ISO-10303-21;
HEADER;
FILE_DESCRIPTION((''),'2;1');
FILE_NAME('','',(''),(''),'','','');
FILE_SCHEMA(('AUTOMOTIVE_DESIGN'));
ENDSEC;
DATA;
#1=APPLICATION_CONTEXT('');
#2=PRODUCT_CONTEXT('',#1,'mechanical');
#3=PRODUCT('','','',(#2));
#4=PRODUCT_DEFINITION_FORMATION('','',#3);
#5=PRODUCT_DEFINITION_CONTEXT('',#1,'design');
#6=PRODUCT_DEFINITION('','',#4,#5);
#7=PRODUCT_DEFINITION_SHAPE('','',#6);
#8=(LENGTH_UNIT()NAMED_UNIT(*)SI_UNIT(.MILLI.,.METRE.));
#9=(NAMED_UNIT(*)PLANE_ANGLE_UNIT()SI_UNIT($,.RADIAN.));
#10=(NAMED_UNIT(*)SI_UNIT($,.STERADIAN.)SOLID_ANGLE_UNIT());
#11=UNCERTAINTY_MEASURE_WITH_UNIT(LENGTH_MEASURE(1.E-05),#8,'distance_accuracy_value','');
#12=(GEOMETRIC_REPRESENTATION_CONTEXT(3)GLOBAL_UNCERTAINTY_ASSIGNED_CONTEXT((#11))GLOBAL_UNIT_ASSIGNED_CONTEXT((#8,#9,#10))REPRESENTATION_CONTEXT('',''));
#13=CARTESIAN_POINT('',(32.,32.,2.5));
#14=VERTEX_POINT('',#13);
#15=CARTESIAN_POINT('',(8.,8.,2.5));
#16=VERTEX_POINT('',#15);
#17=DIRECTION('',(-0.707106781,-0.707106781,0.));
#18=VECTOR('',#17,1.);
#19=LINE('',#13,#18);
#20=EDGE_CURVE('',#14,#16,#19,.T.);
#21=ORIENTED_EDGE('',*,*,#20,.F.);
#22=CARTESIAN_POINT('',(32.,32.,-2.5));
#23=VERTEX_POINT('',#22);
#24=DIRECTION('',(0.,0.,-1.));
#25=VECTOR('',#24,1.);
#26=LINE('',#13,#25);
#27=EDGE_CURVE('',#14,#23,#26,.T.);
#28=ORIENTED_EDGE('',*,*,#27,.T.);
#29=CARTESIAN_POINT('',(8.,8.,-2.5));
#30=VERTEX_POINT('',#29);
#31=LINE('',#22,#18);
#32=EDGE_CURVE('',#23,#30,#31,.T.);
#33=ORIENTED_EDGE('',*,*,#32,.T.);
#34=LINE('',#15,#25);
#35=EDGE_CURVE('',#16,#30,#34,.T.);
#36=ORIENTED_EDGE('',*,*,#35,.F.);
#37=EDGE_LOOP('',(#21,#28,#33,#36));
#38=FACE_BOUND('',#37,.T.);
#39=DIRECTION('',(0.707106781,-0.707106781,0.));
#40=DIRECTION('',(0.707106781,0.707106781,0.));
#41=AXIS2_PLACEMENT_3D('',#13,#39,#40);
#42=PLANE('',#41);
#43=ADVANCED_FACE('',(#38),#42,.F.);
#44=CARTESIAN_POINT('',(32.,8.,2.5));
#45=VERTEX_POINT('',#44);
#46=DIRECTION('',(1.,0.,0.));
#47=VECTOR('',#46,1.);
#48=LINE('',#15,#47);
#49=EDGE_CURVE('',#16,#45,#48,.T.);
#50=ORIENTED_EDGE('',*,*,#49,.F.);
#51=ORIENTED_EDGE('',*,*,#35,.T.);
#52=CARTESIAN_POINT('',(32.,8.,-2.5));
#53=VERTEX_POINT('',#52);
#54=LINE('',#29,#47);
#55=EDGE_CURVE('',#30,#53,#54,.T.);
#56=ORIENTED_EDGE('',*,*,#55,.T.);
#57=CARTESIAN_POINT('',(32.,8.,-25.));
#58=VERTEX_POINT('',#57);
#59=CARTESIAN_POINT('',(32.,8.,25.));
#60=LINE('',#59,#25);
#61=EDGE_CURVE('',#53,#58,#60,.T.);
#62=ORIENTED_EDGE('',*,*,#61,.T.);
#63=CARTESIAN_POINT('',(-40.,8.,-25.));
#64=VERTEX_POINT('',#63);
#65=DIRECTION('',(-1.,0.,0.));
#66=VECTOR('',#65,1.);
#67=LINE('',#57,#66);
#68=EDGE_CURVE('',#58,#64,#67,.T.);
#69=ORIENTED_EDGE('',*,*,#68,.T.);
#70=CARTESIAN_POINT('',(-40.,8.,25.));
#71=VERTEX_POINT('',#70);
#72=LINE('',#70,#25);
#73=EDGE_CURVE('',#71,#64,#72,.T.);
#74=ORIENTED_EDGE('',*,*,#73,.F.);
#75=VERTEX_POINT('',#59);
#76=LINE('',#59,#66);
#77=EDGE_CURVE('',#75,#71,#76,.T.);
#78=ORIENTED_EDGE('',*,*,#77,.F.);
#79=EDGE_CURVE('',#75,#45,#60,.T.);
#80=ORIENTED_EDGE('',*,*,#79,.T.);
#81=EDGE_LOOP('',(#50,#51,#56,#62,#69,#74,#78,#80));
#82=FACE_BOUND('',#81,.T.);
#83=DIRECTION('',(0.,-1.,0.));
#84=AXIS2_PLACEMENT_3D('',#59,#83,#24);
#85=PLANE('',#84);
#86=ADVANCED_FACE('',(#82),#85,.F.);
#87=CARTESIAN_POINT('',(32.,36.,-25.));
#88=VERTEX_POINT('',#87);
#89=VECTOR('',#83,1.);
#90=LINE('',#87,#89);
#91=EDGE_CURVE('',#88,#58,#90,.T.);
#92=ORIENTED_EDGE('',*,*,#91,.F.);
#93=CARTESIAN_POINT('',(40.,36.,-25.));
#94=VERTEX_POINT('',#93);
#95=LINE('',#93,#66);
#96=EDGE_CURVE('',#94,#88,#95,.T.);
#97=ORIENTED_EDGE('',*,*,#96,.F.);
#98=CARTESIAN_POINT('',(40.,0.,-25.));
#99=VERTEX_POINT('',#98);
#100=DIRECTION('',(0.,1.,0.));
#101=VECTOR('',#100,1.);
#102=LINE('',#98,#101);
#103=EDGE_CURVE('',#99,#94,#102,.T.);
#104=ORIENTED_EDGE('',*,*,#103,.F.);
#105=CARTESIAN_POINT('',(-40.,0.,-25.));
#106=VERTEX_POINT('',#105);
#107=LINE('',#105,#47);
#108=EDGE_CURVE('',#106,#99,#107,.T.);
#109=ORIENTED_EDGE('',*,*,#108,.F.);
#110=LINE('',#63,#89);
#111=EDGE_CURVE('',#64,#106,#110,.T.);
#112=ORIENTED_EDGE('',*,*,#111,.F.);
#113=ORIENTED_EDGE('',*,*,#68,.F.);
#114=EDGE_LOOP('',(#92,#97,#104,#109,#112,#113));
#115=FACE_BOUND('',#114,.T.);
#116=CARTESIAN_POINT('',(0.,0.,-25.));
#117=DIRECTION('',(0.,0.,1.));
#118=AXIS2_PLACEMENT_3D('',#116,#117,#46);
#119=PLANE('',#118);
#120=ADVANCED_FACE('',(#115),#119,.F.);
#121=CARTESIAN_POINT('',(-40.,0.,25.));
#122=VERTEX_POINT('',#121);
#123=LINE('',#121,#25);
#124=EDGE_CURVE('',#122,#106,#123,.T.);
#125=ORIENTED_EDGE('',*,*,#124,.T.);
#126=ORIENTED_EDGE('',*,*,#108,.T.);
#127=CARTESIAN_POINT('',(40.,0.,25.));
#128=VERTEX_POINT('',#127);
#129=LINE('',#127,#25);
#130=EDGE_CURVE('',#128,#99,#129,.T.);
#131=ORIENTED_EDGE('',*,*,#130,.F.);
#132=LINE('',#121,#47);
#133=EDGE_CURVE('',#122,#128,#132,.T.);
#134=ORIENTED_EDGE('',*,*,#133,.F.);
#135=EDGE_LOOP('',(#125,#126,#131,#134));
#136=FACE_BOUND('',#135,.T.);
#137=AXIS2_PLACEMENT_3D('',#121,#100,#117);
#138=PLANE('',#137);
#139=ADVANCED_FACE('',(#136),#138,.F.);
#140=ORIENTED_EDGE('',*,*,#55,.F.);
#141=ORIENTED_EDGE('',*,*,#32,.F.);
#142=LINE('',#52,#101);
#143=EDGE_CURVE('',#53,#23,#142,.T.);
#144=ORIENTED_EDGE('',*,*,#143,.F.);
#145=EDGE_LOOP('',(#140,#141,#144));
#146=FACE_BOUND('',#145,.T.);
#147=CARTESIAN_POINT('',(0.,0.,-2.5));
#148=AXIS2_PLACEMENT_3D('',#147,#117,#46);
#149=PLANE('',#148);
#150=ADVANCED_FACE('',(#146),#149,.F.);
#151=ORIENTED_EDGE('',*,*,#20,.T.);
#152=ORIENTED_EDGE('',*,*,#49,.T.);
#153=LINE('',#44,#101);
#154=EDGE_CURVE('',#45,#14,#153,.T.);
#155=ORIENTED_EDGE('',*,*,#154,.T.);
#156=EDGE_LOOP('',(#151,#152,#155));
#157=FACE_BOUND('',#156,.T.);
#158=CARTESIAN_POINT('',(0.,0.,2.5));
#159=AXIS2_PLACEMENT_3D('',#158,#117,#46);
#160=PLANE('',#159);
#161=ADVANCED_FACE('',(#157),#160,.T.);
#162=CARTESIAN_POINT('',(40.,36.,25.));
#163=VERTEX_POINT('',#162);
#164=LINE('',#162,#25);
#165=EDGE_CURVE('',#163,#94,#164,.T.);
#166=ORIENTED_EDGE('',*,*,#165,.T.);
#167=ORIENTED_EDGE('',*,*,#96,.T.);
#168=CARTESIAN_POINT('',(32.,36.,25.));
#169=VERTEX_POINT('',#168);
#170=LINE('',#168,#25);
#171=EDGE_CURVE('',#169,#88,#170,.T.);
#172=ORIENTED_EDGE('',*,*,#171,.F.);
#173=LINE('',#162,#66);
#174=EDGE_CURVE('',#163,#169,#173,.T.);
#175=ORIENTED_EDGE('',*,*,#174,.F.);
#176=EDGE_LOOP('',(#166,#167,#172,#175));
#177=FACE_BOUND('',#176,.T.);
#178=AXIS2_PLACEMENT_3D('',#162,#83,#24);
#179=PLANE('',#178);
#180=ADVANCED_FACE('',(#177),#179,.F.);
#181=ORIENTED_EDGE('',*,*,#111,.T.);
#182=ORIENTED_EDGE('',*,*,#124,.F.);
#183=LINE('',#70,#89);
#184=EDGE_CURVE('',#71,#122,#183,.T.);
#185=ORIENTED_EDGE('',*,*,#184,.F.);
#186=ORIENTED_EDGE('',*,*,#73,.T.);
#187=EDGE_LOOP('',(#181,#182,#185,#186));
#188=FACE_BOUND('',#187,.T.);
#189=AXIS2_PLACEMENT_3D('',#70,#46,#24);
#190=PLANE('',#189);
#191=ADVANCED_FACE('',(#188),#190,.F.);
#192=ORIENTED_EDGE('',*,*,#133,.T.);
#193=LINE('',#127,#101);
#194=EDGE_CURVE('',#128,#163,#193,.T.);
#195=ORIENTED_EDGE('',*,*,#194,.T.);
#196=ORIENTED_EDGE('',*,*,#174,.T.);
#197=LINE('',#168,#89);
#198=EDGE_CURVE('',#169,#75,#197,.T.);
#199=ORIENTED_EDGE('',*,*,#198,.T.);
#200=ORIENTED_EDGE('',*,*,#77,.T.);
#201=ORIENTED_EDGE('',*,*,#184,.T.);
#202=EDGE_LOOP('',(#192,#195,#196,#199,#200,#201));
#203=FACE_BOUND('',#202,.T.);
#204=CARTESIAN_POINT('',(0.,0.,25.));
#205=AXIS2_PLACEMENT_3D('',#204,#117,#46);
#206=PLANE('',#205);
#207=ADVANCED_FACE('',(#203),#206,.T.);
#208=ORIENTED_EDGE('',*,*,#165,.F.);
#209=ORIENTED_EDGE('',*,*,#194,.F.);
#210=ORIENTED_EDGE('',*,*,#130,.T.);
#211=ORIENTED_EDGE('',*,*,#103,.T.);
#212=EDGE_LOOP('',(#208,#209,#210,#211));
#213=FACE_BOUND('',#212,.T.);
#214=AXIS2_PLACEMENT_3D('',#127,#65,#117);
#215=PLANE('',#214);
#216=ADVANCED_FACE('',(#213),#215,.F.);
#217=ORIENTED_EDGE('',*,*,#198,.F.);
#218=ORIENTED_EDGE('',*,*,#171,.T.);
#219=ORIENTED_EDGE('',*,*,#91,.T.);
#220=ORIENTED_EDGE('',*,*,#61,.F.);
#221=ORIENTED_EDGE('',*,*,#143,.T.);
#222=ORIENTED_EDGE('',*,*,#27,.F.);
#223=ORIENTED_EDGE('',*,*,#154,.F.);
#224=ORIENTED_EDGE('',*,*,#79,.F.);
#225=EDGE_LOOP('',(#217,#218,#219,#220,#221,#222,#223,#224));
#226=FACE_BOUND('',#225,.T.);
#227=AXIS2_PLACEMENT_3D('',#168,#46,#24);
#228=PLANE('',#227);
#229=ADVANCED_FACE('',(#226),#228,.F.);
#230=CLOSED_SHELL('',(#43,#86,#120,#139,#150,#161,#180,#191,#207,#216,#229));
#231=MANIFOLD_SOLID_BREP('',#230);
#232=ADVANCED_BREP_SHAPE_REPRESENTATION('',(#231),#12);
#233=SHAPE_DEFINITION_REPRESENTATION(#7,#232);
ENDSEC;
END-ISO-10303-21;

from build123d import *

# Parameters (mm, degrees)
EXTRUDE_1_DEPTH = 50
EXTRUDE_START   = -2.5
EXTRUDE_2_DEPTH = 5


# Read off the part's stored shape, not the designer's step: 凸台-拉伸2
with BuildPart() as part:
    # 草图1 → 凸台-拉伸1 (new body)
    with BuildSketch(Plane.XY.offset(-25)):
        Polygon((-40, 0), (40, 0), (40, 36), (32, 36), (32, 8), (-40, 8), align=None)
    extrude(amount=EXTRUDE_1_DEPTH)

    # 凸台-拉伸2 outline → 凸台-拉伸2 (add)
    with BuildSketch(Plane.XY.offset(EXTRUDE_START)):
        Polygon((32, 32), (8, 8), (32, 8), align=None)
    extrude(amount=EXTRUDE_2_DEPTH)


solid = part.part
